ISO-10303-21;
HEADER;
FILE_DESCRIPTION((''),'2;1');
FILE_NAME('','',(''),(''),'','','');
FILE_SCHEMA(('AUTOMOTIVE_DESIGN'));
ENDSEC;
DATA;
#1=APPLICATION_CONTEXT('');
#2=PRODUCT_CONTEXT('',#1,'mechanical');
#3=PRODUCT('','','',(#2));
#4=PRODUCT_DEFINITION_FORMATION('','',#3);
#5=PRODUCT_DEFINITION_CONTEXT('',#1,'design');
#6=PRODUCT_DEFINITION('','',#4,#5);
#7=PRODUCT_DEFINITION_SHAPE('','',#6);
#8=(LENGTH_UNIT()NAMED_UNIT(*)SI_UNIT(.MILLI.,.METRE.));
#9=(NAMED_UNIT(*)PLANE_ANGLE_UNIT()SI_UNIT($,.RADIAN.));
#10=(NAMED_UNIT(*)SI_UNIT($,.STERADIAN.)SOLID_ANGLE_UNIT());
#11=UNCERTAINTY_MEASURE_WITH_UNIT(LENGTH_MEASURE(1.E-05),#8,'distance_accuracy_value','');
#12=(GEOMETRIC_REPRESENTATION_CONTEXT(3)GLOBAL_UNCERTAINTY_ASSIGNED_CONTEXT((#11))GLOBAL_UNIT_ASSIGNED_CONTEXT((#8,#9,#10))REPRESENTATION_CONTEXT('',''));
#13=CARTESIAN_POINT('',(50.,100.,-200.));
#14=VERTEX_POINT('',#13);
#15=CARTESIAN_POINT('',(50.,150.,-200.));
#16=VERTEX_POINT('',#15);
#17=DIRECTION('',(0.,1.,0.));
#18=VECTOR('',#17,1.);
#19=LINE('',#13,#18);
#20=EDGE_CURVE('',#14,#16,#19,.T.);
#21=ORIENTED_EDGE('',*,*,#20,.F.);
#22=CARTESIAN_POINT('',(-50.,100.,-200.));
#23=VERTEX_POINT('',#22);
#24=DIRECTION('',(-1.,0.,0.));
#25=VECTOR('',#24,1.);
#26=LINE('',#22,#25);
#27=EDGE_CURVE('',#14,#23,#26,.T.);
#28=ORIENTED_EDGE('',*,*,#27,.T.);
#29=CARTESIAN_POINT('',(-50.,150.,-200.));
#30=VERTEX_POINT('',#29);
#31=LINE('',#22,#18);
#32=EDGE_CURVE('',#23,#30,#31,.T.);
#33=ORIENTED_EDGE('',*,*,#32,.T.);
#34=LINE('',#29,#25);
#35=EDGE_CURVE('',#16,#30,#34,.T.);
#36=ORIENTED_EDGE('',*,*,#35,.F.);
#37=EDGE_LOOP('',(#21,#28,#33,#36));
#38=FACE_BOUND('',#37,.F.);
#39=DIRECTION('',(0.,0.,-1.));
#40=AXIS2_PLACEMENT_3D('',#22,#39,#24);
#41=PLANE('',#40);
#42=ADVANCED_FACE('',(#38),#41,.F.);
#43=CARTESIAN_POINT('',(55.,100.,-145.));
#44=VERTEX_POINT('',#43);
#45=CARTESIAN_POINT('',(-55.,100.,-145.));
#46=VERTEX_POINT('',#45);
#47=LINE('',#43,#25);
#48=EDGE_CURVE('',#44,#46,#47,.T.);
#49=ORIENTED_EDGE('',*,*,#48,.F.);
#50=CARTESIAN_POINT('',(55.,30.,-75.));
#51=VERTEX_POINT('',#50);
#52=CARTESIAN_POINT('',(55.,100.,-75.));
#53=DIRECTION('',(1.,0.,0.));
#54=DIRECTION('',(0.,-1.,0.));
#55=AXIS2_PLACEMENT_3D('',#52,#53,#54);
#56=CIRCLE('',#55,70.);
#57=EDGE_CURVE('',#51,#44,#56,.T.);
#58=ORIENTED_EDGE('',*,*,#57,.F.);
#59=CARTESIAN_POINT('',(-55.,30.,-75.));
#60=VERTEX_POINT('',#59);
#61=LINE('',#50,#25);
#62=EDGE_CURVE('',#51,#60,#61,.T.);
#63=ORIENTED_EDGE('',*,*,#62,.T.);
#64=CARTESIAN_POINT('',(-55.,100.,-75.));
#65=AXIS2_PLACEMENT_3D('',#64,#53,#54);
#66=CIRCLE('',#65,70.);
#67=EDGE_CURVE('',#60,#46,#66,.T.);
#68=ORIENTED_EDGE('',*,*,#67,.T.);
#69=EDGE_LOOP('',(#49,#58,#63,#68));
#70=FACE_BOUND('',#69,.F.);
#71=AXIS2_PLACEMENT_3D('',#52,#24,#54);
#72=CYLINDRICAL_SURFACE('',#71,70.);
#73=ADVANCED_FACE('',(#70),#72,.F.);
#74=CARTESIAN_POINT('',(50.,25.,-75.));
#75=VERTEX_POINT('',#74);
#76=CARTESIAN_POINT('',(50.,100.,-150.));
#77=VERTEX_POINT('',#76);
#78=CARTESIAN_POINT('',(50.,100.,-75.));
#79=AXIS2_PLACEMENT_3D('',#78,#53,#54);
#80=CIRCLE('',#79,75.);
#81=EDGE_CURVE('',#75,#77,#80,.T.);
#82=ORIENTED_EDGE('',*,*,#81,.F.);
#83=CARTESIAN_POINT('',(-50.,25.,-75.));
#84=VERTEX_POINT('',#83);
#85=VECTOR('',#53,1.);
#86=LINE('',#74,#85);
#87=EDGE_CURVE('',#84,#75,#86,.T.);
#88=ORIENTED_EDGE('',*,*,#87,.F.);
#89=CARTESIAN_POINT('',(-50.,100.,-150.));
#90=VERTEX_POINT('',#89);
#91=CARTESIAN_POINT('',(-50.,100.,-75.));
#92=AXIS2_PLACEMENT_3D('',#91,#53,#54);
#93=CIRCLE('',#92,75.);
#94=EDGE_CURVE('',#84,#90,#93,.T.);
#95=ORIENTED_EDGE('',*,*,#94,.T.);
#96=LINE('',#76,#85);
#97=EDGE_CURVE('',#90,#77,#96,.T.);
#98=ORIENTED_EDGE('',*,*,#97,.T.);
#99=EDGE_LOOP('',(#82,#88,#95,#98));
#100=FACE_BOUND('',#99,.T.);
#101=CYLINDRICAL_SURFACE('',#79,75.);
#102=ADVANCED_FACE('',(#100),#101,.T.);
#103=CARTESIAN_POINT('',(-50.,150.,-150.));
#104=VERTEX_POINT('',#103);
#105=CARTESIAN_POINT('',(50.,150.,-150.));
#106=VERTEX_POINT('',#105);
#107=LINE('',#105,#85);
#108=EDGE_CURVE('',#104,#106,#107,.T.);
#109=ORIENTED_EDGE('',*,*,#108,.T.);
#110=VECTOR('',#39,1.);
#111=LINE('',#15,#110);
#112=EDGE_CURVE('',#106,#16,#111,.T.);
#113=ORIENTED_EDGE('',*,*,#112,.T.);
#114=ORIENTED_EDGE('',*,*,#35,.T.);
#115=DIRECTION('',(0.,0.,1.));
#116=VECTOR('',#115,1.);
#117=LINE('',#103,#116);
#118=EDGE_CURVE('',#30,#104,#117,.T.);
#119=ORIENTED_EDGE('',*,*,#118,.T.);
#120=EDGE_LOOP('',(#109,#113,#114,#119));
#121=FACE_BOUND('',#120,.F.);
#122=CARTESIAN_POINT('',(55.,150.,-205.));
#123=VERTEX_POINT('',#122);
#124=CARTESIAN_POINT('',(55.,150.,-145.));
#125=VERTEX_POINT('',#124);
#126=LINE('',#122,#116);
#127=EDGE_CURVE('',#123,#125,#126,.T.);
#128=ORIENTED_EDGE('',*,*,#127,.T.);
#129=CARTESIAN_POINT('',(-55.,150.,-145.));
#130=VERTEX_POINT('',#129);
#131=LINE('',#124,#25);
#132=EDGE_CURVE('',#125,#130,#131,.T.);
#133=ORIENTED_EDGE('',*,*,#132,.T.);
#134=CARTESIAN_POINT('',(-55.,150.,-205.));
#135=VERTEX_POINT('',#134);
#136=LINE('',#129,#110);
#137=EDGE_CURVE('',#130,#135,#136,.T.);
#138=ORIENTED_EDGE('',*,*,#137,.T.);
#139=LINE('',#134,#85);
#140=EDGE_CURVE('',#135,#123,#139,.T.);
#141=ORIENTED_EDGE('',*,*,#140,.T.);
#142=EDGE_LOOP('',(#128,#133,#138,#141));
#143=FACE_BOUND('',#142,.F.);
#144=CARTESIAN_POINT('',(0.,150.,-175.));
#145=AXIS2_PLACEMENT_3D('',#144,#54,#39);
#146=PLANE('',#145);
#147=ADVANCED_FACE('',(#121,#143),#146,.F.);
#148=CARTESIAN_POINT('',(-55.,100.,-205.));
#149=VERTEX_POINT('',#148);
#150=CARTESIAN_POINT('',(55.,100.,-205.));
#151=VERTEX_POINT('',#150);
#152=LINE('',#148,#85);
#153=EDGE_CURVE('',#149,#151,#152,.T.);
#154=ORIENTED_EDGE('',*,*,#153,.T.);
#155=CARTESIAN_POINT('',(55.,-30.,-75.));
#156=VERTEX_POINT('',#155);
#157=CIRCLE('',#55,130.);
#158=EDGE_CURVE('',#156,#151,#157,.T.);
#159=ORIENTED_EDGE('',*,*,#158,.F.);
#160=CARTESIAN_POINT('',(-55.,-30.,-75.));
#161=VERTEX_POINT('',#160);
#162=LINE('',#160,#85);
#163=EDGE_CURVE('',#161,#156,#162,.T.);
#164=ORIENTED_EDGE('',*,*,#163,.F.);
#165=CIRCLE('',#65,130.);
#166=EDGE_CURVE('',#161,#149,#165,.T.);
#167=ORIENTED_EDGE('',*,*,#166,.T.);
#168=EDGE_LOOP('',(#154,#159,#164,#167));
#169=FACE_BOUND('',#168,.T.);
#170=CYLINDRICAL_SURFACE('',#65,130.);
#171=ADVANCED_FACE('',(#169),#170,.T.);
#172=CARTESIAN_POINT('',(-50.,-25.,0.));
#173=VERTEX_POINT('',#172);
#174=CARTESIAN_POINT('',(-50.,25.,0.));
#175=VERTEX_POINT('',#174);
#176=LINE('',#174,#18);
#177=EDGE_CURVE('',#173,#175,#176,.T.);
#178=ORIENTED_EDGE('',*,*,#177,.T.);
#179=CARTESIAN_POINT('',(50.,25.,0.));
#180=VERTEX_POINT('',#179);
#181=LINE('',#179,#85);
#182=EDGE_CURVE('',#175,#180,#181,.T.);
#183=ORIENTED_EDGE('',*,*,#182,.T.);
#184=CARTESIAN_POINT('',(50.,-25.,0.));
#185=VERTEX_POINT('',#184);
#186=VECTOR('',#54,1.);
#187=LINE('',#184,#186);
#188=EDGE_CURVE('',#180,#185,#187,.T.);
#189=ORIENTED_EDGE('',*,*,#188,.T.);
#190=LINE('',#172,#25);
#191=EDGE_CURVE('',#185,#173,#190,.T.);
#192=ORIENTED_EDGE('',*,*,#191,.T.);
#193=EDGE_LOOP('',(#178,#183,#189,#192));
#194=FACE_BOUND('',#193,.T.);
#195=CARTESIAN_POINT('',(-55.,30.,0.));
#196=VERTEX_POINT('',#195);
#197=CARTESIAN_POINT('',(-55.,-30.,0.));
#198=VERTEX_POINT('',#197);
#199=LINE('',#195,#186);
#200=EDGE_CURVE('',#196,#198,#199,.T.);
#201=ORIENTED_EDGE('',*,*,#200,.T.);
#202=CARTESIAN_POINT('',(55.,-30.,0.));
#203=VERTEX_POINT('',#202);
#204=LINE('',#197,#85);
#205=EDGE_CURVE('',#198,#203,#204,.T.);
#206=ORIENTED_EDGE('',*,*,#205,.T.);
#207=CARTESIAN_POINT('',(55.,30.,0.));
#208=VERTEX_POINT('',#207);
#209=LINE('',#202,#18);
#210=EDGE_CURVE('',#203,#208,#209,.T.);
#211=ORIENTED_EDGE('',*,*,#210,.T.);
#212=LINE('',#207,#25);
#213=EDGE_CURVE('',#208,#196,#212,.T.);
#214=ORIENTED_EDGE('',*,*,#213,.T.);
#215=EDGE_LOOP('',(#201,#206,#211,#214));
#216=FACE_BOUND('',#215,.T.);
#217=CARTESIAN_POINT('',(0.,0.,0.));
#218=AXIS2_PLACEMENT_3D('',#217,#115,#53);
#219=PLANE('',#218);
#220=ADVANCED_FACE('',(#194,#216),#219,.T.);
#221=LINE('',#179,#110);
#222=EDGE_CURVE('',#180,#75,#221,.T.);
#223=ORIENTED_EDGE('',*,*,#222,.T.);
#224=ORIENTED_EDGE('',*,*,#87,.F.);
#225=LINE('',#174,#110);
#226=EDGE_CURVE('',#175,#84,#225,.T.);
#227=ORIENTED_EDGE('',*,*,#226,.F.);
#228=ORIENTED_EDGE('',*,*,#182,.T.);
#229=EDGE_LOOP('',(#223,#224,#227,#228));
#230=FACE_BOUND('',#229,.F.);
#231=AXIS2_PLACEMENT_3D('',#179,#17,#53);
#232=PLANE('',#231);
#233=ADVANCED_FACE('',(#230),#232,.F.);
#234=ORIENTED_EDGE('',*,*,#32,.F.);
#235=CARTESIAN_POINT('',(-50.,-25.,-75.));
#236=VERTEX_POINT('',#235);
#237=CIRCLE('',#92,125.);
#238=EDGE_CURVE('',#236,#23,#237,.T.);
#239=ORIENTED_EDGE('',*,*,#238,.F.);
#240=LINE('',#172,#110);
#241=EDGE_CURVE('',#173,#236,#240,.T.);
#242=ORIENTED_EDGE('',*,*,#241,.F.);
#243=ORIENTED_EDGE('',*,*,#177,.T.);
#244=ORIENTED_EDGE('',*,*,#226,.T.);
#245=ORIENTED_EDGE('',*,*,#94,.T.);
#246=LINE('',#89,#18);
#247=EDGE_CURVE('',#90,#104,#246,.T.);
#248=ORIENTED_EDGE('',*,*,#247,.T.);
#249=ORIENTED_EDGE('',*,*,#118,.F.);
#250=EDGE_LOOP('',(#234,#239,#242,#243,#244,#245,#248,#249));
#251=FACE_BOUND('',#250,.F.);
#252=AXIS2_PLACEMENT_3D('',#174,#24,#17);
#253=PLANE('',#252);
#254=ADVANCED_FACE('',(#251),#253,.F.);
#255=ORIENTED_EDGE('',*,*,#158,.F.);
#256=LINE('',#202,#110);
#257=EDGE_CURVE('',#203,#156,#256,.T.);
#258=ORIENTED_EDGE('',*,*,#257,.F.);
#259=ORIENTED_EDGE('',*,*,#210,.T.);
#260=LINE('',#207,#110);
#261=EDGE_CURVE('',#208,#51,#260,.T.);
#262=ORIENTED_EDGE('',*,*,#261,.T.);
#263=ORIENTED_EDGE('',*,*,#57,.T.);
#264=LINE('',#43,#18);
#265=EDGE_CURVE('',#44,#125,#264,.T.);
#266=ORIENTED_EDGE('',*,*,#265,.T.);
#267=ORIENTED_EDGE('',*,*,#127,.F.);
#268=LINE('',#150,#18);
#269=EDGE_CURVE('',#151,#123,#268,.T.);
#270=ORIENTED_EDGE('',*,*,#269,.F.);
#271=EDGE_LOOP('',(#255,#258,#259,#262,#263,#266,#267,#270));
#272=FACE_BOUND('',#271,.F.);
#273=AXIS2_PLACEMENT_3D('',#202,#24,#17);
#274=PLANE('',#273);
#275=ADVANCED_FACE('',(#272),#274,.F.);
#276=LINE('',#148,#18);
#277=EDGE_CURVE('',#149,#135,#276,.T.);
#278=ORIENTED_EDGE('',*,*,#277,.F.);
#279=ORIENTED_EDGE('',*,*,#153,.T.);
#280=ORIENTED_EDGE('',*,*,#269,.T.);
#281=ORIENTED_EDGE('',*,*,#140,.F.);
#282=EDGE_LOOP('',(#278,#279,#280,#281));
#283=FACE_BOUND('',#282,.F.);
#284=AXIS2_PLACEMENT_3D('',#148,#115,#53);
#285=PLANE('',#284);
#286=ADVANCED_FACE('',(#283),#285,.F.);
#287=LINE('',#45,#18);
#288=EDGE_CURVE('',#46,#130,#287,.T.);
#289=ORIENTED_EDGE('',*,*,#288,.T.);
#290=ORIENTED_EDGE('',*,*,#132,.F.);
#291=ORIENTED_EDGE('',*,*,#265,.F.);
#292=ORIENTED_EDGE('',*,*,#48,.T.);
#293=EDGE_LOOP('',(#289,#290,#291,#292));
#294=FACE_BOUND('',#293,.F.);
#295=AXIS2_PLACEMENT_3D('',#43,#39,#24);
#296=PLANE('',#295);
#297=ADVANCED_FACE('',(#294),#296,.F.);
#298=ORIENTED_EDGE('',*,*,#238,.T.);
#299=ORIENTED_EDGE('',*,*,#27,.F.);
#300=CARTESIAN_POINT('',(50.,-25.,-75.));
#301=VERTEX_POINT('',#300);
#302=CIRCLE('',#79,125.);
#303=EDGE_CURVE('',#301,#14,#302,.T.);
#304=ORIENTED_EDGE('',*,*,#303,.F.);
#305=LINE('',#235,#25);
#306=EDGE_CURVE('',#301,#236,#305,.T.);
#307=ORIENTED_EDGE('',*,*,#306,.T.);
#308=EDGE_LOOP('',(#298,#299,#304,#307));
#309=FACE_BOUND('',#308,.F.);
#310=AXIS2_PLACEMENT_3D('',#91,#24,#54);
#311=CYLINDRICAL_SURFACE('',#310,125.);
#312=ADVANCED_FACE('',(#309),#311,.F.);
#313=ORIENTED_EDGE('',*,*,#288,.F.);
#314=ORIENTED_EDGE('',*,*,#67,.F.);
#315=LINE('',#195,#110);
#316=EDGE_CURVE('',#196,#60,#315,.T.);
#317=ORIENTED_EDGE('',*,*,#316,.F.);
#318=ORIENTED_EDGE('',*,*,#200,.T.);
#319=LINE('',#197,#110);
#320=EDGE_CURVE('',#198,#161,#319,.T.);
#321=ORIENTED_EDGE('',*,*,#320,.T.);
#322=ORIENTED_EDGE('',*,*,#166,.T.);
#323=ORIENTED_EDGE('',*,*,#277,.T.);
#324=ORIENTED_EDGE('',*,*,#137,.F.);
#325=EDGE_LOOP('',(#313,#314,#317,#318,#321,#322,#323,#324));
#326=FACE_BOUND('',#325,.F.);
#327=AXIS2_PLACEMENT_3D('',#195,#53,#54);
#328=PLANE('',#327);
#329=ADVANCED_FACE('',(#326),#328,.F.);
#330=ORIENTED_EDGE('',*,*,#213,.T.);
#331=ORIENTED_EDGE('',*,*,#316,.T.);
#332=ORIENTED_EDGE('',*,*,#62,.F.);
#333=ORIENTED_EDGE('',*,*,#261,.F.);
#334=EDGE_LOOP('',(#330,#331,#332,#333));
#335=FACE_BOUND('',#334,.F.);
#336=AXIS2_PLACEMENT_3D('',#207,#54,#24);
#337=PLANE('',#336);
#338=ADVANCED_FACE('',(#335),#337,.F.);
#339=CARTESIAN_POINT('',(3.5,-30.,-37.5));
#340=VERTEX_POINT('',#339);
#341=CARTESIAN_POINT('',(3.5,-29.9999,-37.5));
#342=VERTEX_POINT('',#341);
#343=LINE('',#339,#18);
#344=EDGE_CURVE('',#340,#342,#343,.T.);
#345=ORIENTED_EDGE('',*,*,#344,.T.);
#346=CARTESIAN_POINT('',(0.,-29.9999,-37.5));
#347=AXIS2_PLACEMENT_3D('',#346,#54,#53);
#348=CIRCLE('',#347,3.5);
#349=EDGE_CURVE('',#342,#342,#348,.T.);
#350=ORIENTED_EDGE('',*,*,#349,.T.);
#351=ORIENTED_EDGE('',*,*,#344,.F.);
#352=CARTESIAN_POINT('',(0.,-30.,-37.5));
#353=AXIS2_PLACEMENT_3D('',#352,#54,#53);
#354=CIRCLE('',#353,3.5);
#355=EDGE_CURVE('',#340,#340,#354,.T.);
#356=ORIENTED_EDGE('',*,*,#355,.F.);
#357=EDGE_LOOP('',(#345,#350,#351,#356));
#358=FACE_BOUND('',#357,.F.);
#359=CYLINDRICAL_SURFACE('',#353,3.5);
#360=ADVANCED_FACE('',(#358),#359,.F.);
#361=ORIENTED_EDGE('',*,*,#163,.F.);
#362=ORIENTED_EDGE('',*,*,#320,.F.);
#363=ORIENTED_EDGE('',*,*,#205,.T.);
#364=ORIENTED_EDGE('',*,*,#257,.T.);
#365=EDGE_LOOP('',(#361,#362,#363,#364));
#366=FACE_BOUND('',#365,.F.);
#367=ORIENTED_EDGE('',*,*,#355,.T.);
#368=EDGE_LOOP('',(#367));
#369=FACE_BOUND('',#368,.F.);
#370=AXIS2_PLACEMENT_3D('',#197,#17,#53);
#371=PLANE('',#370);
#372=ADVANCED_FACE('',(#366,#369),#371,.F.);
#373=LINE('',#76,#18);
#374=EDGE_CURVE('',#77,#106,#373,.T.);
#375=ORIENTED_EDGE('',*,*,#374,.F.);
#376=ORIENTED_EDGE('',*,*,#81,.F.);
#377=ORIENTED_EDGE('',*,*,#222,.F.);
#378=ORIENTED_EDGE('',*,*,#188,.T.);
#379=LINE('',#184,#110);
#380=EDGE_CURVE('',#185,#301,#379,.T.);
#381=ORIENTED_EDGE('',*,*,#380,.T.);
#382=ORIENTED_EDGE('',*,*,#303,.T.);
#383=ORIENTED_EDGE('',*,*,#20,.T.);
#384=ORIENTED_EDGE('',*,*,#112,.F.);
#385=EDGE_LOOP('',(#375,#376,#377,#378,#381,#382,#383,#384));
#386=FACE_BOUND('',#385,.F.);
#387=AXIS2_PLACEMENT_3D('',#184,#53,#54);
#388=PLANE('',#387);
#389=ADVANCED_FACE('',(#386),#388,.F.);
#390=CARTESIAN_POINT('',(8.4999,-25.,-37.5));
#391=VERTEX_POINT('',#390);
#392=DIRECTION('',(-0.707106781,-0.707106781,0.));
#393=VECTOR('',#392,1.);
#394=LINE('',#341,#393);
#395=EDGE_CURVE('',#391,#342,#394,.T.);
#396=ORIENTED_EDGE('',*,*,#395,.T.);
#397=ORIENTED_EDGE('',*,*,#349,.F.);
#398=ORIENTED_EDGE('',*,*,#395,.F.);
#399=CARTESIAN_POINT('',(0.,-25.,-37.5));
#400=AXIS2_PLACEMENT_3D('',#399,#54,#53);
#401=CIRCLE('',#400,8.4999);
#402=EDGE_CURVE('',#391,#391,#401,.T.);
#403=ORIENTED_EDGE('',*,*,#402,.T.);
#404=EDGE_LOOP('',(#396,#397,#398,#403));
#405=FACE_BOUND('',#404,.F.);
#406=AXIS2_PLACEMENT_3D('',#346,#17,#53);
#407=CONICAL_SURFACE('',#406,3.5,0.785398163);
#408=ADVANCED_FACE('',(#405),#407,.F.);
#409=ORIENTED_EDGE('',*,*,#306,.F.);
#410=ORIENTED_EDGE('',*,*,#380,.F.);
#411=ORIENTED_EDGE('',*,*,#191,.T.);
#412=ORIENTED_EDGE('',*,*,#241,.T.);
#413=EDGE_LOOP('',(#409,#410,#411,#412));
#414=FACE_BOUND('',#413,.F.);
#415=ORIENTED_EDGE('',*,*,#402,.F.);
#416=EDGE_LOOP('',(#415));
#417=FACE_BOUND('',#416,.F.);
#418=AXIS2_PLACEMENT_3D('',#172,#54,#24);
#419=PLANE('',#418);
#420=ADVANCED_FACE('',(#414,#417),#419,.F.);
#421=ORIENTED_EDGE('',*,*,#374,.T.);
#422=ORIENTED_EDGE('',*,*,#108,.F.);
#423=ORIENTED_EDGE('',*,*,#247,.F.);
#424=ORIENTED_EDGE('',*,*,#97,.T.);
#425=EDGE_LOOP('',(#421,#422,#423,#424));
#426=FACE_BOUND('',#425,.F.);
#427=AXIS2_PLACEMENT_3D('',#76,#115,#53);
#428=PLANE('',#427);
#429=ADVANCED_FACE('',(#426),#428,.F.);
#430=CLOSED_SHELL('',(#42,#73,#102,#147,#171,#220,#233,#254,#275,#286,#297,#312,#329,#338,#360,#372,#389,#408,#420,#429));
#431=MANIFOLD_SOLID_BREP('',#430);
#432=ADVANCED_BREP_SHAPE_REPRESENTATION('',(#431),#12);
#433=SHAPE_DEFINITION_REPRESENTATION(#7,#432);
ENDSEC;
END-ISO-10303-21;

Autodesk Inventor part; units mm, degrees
ref_plane "YZ Plane" through (0, 0, 0) normal (1, 0, 0) x (0, 1, 0)
ref_plane "XZ Plane" through (0, 0, 0) normal (0, 1, 0) x (-1, 0, 0)
ref_plane "XY Plane" through (0, 0, 0) normal (0, 0, 1) x (1, 0, 0)
sketch "Sketch1" plane through (0, 0, 0) normal (0, 0, 1) x (1, 0, 0)
  point P0 (0, 0)
sketch "Sketch2" plane through (0, 0, 0) normal (0, 0, 1) x (1, 0, 0)
  line L0 (-50, -25) -> (50, -25)
  line L1 (50, -25) -> (50, 25)
  line L2 (50, 25) -> (-50, 25)
  line L3 (-50, 25) -> (-50, -25)
  line L4 (-50, -25) -> (50, 25) construction
  line L5 (50, -25) -> (-50, 25) construction
  line L6 (-55, -30) -> (55, -30)
  line L7 (55, -30) -> (55, 30)
  line L8 (55, 30) -> (-55, 30)
  line L9 (-55, 30) -> (-55, -30)
  line L10 (-55, -30) -> (55, 30) construction
  line L11 (55, -30) -> (-55, 30) construction
  point P0 (0, 0)
  dimension "d0" = 100
  dimension "d1" = 50
  dimension "d2" = 110
  dimension "d3" = 60
sketch "Sketch3" plane through (0, 0, 0) normal (1, 0, 0) x (0, 1, 0)
  line L0 (0, 0) -> (0, -75)
  arc A0 (0, -75) -> (100, -175) centre (100, -75) ccw
  line L1 (100, -75) -> (100, -175) construction
  line L2 (100, -75) -> (0, -75) construction
  line L3 (100, -175) -> (150, -175)
sweep "Sweep1" add profiles "Sketch2" path "Sketch3"
sketch "Sketch4" plane through (-55, -30, 0) normal (0, -1, 0) x (1, 0, 0)
  circle A0 centre (55, -37.5) radius 3.5
  point P0 (55, 0)
  dimension "d9" = 7
extrude "Extrusion1" cut sketch "Sketch4" against normal blind 10
chamfer "Chamfer1" distance 5 angle 45 1 edges at (-3.5, -25, -37.5)
properties part number "RecTubeNewTappingChamfer"
